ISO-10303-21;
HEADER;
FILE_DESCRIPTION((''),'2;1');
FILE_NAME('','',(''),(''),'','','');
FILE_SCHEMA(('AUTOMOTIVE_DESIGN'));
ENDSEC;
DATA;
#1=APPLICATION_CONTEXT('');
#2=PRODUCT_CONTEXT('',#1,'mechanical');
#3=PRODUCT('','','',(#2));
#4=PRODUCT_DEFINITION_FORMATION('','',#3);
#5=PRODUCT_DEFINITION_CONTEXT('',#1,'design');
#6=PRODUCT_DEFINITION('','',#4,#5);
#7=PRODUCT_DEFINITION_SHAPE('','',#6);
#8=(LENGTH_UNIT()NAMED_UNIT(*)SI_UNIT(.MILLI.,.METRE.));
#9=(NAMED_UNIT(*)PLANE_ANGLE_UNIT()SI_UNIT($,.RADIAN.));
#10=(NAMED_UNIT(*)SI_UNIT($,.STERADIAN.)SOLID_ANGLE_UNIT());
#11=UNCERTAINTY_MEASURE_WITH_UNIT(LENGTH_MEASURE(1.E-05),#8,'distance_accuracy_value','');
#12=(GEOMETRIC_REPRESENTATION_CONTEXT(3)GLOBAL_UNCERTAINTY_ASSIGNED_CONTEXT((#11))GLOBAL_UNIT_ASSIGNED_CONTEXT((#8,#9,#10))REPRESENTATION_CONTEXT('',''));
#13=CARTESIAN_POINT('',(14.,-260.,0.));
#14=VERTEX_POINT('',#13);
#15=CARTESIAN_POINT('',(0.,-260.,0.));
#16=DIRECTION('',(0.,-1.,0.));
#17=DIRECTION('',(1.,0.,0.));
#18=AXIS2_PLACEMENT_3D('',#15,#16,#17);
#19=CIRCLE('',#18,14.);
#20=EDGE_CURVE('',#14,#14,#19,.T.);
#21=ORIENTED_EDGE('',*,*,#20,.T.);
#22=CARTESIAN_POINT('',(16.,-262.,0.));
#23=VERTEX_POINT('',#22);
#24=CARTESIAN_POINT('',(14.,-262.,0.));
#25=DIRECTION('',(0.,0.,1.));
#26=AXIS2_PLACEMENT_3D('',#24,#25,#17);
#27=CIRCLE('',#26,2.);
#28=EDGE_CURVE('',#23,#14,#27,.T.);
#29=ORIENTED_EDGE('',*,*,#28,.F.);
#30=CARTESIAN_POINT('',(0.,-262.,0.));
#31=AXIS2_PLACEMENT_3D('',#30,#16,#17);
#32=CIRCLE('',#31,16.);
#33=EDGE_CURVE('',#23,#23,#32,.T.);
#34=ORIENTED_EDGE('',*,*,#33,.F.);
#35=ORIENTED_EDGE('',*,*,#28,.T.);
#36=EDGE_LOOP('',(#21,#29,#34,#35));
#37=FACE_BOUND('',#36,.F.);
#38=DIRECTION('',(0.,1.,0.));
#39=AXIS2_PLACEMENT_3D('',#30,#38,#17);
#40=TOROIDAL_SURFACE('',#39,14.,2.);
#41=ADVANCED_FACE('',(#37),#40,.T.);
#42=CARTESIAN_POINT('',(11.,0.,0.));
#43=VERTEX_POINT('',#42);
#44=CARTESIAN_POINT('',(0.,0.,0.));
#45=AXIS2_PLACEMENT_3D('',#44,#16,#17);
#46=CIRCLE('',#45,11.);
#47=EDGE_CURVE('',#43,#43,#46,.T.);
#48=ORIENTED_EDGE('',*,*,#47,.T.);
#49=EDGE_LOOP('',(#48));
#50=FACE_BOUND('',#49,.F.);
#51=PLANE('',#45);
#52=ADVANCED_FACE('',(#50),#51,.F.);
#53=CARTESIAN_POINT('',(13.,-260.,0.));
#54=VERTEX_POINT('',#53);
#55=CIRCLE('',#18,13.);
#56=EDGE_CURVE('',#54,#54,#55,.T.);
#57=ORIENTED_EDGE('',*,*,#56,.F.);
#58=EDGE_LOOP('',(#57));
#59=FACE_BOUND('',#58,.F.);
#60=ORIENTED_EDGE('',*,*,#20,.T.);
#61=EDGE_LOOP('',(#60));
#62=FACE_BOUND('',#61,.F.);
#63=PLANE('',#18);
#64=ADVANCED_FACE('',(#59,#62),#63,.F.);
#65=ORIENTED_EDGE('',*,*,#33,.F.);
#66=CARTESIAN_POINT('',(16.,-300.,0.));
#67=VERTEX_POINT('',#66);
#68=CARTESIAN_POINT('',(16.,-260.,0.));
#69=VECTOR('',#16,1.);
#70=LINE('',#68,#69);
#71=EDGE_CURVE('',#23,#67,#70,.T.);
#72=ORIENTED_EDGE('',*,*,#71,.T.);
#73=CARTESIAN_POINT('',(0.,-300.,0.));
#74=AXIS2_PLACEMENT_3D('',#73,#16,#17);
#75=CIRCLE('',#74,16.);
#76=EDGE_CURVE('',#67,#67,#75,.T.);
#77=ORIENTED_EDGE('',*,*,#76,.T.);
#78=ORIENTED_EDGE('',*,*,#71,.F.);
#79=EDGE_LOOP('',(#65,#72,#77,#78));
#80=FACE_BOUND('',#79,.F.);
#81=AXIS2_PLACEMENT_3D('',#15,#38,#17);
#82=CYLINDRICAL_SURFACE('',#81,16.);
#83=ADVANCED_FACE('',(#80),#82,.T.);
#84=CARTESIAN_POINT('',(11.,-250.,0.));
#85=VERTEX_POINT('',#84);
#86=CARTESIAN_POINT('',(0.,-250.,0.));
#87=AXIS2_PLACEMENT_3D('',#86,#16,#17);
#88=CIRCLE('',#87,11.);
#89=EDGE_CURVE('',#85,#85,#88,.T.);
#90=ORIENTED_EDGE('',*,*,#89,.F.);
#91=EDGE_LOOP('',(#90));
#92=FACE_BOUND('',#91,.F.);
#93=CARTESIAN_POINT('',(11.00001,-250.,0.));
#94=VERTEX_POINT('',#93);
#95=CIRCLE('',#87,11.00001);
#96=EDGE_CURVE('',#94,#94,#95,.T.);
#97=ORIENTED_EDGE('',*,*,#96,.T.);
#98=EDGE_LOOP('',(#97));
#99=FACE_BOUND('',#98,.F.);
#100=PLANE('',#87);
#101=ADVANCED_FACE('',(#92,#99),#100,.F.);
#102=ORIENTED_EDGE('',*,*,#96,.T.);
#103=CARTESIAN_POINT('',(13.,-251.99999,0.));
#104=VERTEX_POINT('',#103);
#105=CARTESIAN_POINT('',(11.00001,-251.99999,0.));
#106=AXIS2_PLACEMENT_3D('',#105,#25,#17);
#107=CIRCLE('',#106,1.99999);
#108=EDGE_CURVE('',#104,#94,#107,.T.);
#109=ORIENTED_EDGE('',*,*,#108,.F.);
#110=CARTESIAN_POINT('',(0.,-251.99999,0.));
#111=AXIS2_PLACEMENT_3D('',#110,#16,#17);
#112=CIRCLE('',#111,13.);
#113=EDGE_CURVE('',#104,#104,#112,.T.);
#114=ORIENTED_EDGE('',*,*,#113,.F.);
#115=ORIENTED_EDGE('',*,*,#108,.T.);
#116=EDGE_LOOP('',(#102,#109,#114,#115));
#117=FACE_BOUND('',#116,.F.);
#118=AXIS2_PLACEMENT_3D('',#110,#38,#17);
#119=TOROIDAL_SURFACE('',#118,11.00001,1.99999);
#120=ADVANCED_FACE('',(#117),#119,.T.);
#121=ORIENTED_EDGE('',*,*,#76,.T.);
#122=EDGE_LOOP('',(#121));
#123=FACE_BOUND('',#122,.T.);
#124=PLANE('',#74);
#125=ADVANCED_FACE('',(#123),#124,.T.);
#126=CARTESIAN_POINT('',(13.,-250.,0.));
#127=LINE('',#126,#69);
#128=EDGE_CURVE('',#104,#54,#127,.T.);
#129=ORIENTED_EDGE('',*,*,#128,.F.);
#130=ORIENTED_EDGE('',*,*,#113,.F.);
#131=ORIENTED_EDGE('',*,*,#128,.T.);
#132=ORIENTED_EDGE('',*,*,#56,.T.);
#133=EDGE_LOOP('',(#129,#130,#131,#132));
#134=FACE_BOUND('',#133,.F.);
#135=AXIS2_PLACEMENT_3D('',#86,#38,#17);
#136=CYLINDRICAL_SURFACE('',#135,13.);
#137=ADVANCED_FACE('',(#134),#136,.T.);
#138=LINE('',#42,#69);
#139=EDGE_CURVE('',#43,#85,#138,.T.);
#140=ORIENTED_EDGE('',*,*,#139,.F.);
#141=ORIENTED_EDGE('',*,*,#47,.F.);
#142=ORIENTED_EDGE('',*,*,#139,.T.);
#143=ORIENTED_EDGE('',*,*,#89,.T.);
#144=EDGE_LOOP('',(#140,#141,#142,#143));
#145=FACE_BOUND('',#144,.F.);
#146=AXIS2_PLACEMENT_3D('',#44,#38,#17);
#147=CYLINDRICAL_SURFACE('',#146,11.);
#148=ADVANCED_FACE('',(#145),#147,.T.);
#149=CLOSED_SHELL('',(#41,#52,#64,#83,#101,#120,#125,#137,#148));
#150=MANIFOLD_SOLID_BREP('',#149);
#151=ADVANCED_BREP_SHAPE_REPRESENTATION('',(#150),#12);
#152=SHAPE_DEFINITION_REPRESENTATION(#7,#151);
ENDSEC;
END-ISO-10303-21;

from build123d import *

# Parameters (mm, degrees)
F0_R     = 11
F1_DEPTH = 250
F2_R     = 13
F2_R_2   = 11
F3_DEPTH = 10
F4_R     = 1.99999
F5_R     = 16
F5_R_2   = 13
F6_DEPTH = 40
F7_R     = 2


# Not quite as in the source:
# - a fillet or chamfer is up to 0.001 mm smaller than in the source, because OpenCascade refuses the exact size


with BuildPart() as f1:
    # F0 (on Front) → F1 (new body)
    with BuildSketch(Plane.XZ):
        Circle(F0_R)
    extrude(amount=F1_DEPTH)

    # F2 (on face) → F3 (join)
    with BuildSketch(Plane.XZ.offset(250)):
        Circle(F2_R)
        Circle(F2_R_2, mode=Mode.SUBTRACT)
        Circle(F2_R_2)
    extrude(amount=F3_DEPTH)

    # F4 (radius 2 in the source; OpenCascade refuses exactly that, so slightly less here)
    f4_edges = [f1.edges().sort_by_distance(p)[0] for p in [
        (-13, -250, 0),
    ]]
    fillet(f4_edges, radius=F4_R)

    # F5 (on face) → F6 (join)
    with BuildSketch(Plane.XZ.offset(260)):
        Circle(F5_R)
        Circle(F5_R_2, mode=Mode.SUBTRACT)
        Circle(F5_R_2)
    extrude(amount=F6_DEPTH)

    # F7
    f7_edges = [f1.edges().sort_by_distance(p)[0] for p in [
        (-16, -260, 0),
    ]]
    fillet(f7_edges, radius=F7_R)


solid = f1.part
